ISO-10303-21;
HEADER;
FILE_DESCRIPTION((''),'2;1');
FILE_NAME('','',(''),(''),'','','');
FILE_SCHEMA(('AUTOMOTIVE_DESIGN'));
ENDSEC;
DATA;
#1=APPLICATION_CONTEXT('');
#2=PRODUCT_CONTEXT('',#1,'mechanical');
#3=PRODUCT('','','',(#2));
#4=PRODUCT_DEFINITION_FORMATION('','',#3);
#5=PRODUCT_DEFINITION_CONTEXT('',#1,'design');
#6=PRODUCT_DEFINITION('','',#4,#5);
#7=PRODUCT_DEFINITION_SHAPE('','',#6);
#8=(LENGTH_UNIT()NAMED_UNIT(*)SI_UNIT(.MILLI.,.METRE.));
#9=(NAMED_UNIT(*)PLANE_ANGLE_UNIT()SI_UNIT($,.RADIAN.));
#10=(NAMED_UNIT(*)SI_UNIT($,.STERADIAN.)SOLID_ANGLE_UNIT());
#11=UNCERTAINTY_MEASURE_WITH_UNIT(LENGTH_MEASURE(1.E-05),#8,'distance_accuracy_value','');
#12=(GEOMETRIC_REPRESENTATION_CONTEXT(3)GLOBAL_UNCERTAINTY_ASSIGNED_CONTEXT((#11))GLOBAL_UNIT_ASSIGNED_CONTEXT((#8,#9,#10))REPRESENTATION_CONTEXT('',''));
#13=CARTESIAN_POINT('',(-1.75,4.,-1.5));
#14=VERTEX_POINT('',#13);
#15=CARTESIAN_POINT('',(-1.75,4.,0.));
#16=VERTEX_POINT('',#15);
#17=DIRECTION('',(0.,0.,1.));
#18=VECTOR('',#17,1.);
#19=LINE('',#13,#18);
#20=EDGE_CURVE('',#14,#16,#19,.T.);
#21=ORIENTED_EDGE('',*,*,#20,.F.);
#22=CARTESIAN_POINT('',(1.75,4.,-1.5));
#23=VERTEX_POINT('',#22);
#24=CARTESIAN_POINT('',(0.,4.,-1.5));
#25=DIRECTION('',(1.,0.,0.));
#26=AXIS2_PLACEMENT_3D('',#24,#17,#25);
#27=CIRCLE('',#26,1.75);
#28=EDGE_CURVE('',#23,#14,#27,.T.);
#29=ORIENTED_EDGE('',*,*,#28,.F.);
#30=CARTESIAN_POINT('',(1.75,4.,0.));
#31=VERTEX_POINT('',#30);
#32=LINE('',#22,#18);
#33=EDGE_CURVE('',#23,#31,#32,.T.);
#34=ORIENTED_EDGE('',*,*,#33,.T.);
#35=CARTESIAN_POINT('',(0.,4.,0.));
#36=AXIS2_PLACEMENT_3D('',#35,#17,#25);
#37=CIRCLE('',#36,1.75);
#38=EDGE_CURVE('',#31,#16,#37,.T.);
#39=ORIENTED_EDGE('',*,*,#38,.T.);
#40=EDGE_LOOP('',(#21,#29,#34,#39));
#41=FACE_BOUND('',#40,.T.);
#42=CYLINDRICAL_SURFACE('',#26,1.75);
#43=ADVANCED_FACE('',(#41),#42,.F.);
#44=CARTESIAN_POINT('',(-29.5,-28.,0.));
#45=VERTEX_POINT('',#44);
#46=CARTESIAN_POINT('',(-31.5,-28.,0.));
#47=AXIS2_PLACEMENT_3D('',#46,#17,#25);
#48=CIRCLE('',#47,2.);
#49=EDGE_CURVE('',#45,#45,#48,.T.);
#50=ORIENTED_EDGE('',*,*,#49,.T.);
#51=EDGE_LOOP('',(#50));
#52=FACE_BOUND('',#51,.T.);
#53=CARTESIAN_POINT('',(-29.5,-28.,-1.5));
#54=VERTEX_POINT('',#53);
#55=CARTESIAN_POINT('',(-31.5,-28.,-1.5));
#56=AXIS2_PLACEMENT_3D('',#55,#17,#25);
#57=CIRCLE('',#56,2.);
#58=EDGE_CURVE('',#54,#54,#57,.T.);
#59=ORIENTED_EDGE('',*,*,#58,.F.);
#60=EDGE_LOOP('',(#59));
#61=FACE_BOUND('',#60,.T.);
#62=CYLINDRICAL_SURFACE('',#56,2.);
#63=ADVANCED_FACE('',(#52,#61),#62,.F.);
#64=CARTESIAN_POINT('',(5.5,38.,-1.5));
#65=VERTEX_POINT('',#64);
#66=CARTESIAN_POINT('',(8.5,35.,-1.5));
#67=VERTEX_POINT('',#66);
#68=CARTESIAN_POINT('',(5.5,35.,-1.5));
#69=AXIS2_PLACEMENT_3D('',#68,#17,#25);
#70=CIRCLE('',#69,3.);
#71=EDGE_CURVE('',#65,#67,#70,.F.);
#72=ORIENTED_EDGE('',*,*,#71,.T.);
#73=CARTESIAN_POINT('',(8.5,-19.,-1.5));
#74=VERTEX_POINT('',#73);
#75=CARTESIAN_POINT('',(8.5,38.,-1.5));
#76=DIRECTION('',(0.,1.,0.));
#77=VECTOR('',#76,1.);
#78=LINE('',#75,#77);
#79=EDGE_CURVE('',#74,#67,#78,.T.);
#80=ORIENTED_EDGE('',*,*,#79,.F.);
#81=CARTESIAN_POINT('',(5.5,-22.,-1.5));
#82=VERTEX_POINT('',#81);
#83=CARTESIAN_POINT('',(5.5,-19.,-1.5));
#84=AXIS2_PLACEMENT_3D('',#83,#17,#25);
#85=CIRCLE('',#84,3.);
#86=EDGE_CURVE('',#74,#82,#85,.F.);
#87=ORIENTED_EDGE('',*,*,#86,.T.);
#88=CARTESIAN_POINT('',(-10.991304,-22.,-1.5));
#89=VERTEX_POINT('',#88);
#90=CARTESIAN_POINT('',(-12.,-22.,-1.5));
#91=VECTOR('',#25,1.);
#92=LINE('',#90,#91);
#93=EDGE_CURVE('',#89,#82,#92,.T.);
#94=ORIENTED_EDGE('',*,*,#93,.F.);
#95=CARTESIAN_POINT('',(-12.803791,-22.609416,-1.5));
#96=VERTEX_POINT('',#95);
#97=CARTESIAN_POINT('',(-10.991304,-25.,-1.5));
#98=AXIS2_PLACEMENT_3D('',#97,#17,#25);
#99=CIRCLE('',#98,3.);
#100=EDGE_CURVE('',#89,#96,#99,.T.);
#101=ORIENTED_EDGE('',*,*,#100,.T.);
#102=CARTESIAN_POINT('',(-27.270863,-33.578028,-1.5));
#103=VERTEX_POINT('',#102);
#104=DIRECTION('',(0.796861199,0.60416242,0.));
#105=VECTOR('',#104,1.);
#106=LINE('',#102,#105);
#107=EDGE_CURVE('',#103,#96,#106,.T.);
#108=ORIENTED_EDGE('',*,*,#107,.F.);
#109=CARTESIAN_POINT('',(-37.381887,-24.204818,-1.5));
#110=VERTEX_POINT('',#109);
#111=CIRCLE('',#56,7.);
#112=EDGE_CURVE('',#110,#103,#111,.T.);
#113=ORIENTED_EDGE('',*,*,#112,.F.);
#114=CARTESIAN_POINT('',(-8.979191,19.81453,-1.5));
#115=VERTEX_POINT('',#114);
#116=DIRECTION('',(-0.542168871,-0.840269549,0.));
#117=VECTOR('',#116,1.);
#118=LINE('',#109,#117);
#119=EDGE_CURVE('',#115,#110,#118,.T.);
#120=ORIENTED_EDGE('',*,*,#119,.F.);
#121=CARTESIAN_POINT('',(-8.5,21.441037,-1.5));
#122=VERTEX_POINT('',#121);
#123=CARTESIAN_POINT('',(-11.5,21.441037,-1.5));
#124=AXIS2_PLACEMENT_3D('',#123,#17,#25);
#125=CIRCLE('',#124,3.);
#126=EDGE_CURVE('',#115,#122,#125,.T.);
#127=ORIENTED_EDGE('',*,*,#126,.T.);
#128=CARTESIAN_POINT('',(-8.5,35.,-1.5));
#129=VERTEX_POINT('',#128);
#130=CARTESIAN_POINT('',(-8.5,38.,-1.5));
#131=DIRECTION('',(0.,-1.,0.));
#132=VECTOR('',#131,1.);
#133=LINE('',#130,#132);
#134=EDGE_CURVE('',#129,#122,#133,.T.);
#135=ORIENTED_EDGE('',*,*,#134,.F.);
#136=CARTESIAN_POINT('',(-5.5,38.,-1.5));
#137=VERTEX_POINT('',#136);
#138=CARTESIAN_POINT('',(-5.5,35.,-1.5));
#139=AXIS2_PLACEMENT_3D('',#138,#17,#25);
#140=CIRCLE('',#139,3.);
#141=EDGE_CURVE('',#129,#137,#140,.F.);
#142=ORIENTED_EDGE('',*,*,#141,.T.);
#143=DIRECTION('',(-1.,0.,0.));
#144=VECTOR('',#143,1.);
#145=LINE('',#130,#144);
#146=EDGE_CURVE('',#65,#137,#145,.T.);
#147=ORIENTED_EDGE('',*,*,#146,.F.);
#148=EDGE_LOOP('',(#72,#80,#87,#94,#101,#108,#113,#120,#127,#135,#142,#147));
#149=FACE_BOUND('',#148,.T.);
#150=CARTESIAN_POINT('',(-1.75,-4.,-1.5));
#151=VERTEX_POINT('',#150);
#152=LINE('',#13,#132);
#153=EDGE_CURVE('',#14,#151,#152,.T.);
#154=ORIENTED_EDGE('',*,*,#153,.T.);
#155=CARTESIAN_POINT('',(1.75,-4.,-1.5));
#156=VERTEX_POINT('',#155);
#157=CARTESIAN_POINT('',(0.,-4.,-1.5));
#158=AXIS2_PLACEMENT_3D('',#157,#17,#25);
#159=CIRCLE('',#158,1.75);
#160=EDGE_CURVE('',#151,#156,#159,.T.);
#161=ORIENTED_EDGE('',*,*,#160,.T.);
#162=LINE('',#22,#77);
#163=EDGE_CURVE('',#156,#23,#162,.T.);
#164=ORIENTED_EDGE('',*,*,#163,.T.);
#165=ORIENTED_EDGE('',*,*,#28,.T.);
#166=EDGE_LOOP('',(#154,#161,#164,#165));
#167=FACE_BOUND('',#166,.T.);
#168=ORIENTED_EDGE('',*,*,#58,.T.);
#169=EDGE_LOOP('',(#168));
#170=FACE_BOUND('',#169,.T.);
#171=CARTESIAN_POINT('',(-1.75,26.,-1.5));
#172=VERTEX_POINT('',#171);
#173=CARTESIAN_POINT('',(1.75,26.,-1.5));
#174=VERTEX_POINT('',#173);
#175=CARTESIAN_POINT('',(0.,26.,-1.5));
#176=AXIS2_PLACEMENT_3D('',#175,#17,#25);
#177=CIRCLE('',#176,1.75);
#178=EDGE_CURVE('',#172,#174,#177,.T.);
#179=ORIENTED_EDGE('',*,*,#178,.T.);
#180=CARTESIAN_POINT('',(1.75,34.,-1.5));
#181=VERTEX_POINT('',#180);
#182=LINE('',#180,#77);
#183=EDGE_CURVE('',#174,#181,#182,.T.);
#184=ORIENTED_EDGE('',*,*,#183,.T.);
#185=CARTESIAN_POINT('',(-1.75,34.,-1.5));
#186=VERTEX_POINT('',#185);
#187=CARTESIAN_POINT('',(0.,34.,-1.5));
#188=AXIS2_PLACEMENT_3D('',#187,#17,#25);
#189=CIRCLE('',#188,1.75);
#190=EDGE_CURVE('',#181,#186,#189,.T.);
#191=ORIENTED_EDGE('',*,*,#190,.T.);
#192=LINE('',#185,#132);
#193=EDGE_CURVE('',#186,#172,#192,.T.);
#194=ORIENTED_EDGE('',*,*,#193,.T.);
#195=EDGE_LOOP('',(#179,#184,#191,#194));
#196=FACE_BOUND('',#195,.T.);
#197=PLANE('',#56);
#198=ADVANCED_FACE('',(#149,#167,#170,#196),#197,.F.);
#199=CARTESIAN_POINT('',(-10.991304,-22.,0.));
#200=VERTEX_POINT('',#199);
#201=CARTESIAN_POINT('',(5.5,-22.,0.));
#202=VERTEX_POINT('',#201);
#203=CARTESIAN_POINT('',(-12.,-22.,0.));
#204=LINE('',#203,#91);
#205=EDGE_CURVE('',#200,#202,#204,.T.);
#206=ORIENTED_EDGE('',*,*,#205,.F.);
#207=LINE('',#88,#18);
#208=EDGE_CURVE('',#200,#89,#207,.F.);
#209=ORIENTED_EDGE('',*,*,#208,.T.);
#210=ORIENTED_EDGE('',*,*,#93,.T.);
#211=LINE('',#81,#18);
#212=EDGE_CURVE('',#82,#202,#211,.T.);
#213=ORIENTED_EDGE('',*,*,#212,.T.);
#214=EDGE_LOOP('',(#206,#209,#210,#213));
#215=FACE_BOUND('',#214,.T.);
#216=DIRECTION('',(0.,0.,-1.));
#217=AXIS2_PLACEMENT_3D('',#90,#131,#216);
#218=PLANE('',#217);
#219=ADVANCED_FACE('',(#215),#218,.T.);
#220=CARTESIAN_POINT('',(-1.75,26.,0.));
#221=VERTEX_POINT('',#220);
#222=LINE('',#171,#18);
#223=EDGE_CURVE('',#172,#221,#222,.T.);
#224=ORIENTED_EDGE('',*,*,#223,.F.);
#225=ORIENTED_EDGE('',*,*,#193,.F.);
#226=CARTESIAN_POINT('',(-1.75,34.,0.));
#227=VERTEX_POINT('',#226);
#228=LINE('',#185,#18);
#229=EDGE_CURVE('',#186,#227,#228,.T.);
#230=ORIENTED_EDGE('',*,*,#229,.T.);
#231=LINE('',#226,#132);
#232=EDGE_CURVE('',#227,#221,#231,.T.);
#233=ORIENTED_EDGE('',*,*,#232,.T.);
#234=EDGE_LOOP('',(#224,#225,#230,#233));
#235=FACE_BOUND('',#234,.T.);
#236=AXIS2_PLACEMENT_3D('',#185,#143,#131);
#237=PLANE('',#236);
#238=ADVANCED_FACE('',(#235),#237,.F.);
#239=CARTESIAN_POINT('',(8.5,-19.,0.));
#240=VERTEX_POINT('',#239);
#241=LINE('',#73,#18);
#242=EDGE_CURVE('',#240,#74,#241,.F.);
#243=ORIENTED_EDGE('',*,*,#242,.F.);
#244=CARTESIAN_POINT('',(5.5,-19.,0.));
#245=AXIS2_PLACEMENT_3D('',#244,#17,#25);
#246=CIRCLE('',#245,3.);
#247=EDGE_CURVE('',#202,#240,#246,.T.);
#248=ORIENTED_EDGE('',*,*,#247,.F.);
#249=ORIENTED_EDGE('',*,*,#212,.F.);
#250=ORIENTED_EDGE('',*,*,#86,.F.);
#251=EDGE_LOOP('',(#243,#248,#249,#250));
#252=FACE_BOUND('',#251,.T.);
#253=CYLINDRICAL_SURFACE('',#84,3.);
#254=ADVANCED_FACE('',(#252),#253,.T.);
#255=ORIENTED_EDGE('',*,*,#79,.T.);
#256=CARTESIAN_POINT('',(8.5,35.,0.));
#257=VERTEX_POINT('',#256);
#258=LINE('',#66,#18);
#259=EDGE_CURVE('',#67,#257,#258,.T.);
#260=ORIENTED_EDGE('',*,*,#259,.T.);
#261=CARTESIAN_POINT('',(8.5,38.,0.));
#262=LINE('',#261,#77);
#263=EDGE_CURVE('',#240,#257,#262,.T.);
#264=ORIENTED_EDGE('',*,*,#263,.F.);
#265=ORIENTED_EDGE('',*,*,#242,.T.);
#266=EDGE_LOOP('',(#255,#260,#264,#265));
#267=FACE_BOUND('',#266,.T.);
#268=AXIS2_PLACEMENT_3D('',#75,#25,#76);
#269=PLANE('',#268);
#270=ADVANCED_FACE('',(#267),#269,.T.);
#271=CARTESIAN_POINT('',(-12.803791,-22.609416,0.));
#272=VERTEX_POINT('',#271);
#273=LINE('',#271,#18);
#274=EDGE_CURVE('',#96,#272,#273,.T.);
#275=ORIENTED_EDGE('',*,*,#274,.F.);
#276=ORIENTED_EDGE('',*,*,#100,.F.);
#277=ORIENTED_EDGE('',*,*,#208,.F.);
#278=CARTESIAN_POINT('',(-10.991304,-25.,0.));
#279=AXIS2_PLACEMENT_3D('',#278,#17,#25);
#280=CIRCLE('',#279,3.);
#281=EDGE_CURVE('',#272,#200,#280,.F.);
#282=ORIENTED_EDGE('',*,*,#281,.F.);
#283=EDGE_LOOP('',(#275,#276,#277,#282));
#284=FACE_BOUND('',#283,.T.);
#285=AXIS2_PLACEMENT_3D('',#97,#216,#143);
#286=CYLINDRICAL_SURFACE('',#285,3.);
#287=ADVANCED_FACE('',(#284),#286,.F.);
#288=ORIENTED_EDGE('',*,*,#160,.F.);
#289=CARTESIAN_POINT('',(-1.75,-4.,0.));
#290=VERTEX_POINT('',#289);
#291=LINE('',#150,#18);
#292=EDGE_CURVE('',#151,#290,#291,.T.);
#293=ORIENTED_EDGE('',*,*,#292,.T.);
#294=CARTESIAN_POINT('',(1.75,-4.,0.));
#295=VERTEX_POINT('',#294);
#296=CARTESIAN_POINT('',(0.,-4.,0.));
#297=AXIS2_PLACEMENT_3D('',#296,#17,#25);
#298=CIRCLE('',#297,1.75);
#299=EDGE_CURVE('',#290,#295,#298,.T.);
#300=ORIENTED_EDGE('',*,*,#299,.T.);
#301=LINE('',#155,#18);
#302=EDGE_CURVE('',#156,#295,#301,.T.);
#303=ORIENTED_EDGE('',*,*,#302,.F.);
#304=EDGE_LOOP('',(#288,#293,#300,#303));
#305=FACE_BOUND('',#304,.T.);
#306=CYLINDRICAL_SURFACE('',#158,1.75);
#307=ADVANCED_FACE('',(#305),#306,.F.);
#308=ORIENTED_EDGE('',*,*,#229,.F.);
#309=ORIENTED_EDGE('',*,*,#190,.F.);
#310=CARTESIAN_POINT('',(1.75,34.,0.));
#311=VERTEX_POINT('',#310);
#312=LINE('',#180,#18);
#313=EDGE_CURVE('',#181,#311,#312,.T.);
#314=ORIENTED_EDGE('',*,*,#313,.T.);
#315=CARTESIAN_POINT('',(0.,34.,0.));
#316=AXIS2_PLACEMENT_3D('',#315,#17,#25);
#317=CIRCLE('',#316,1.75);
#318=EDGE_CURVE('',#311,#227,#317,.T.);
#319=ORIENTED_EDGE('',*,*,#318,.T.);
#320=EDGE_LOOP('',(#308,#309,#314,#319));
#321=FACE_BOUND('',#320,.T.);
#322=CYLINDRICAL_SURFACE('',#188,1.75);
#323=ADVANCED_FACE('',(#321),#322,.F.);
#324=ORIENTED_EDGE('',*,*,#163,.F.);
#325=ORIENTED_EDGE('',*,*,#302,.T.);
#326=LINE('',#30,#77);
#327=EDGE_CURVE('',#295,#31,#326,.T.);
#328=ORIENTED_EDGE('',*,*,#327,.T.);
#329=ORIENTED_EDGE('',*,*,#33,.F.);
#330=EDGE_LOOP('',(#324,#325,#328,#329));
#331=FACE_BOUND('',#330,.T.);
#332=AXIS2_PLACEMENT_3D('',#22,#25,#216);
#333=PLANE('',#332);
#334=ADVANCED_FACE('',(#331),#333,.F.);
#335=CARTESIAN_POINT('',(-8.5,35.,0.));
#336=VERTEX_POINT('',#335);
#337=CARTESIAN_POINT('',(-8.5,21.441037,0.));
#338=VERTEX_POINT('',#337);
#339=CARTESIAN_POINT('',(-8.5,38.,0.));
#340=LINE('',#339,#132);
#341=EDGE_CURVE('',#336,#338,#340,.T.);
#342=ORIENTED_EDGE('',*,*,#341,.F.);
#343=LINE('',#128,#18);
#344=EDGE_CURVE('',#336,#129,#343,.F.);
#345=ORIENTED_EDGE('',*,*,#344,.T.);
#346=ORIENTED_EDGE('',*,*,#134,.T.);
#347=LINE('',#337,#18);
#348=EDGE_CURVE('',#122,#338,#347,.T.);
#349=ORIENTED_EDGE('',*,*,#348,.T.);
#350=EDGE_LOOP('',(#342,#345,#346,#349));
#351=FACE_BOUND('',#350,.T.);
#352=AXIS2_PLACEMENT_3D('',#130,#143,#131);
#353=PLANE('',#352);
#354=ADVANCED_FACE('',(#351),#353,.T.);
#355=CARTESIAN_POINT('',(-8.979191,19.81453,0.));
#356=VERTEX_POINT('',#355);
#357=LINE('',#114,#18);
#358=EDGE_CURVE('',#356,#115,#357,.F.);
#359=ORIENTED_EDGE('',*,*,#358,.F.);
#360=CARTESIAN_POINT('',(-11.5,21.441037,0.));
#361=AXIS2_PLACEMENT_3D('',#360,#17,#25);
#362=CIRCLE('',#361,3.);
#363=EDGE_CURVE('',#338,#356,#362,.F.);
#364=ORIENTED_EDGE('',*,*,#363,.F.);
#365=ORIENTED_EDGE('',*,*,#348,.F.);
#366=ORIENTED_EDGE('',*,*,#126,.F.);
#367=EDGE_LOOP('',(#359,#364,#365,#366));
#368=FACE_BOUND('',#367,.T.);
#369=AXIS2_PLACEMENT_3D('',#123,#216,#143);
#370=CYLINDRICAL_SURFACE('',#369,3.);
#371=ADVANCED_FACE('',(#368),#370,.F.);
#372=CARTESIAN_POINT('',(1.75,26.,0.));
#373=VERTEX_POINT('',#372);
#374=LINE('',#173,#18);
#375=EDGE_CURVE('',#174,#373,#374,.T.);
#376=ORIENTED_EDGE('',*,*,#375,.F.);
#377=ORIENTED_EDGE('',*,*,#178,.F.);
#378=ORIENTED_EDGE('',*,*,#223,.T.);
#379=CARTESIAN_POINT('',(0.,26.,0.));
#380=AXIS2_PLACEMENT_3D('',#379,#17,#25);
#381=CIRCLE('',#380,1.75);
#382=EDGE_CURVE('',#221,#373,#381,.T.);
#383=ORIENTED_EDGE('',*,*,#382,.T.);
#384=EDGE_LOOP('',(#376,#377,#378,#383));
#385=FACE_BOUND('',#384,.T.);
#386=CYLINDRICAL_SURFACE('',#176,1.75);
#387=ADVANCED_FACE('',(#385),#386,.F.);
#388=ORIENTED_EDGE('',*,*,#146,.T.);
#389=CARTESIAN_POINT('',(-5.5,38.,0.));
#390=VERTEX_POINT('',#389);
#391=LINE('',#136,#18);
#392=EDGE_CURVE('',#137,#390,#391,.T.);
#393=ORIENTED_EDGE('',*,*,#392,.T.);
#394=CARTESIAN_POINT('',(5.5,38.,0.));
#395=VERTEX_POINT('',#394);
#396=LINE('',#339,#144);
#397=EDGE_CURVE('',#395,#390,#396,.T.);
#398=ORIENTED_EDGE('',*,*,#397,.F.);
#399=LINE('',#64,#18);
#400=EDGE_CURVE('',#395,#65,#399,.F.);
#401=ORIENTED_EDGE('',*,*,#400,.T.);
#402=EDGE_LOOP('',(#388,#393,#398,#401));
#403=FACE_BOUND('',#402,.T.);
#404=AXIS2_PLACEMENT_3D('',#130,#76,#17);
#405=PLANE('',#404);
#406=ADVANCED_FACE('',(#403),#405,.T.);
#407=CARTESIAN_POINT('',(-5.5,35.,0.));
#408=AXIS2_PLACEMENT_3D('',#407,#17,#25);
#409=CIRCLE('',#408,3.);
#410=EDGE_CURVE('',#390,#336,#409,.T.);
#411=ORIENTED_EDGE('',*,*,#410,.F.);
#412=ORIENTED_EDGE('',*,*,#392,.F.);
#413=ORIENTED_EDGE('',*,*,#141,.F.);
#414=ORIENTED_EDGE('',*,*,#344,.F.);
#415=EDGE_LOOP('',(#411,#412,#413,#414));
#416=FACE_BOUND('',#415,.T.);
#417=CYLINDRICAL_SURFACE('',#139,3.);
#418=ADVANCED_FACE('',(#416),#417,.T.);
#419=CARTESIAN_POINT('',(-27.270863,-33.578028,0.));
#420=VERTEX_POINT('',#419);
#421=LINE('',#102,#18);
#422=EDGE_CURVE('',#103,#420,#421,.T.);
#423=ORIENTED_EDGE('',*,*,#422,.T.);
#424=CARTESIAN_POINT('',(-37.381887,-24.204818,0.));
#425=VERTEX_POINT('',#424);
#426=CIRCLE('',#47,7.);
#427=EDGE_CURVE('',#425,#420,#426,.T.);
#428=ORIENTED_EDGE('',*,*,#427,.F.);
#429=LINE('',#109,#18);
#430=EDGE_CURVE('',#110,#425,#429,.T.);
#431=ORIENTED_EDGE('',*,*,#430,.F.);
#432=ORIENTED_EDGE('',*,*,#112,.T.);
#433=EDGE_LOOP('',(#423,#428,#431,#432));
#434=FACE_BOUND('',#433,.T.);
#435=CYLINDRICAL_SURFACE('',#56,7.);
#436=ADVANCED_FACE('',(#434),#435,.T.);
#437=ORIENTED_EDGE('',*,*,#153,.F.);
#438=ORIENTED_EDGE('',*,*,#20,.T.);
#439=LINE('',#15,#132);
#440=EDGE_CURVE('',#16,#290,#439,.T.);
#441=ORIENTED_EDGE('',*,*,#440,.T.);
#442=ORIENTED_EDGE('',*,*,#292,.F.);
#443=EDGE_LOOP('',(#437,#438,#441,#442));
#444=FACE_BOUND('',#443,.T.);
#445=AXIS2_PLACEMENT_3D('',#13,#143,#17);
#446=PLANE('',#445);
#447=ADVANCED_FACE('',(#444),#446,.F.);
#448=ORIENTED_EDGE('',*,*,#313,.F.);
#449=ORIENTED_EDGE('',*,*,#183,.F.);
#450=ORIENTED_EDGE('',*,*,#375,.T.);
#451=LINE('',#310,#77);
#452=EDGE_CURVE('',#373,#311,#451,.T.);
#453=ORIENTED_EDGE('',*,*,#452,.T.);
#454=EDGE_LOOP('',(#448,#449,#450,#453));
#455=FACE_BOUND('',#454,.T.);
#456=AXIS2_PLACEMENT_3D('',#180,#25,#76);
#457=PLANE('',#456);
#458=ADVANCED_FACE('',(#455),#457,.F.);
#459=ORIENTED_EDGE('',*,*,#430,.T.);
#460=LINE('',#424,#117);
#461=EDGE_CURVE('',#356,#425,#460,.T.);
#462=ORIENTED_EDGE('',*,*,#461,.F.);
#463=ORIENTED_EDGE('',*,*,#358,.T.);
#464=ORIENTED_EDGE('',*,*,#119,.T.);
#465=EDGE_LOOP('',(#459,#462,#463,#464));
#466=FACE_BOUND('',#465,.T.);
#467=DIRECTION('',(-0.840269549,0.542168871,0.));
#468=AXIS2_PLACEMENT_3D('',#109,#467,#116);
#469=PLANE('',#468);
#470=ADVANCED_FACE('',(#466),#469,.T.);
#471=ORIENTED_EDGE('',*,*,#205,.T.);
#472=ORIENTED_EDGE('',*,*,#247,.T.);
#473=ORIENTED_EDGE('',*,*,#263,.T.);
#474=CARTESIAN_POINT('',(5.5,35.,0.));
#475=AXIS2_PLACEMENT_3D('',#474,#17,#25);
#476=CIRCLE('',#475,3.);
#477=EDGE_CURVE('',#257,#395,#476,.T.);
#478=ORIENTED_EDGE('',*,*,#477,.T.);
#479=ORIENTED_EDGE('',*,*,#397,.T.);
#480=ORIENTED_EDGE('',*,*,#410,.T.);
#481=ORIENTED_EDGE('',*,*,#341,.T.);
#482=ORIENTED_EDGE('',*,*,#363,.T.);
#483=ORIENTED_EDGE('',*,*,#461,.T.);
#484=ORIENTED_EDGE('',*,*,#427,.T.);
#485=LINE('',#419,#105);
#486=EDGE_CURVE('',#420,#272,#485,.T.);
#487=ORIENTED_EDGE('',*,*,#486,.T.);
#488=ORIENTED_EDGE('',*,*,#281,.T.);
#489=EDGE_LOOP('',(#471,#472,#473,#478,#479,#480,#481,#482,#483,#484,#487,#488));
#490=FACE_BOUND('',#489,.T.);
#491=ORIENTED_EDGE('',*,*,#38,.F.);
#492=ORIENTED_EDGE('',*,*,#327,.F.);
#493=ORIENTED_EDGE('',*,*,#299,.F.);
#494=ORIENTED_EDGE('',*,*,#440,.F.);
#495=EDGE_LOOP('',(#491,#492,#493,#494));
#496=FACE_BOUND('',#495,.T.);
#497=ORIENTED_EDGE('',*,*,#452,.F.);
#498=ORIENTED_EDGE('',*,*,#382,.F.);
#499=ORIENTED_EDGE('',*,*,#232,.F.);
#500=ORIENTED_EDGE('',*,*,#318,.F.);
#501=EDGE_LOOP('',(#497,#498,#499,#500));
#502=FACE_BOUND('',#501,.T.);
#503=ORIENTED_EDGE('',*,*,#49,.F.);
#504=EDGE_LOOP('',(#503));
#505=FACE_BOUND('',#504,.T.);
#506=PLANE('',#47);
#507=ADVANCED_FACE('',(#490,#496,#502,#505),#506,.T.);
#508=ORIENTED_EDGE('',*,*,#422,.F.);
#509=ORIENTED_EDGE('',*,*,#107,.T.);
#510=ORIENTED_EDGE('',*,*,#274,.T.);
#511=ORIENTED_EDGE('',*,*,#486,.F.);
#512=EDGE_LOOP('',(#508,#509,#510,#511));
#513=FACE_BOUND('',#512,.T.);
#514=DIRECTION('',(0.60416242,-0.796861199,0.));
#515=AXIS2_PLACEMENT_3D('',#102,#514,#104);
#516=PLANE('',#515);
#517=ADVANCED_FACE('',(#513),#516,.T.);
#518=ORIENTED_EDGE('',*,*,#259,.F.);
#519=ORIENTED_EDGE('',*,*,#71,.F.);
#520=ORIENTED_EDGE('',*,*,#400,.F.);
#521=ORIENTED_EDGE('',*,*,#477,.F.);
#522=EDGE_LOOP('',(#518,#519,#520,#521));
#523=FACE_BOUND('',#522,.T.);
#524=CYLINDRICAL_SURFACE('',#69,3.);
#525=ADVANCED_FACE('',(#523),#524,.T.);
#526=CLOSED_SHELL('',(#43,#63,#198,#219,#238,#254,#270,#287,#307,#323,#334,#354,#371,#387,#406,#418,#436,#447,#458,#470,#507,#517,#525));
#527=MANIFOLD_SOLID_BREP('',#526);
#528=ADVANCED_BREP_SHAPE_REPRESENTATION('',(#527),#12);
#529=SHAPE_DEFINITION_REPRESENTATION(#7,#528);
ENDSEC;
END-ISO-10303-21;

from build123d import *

# Parameters (mm, degrees)
ESQUISSE1_R               = 2
T_LE_DE_BASE_PLI_E1_DEPTH = 1.5
CONG_1_R                  = 3


# Sheet-metal steps are written as plain solids
with BuildPart() as part:
    # Esquisse1 → Tôle de base pliée1 (new body)
    with BuildSketch(Plane.XY):
        with BuildLine():
            Line((-27.270863059, -33.578028391), (-12, -22))
            Line((-12, -22), (8.5, -22))
            Line((8.5, -22), (8.5, 38))
            Line((8.5, 38), (-8.5, 38))
            Line((-8.5, 38), (-8.5, 20.557195103))
            Line((-8.5, 20.557195103), (-37.381886846, -24.204817905))
            ThreePointArc((-37.381886846, -24.204817905), (-36.258903683, -33.133501313), (-27.270863059, -33.578028391))
        make_face()
        with Locations((-31.5, -28)):
            Circle(ESQUISSE1_R, mode=Mode.SUBTRACT)
        with BuildLine():
            Line((1.75, 4), (1.75, -4))
            ThreePointArc((1.75, -4), (0, -5.75), (-1.75, -4))
            Line((-1.75, -4), (-1.75, 4))
            ThreePointArc((-1.75, 4), (0, 5.75), (1.75, 4))
        make_face(mode=Mode.SUBTRACT)
        with BuildLine():
            Line((1.75, 34), (1.75, 26))
            ThreePointArc((1.75, 26), (0, 24.25), (-1.75, 26))
            Line((-1.75, 26), (-1.75, 34))
            ThreePointArc((-1.75, 34), (0, 35.75), (1.75, 34))
        make_face(mode=Mode.SUBTRACT)
    extrude(amount=-T_LE_DE_BASE_PLI_E1_DEPTH)

    # Congé1
    cong_1_edges = [part.edges().sort_by_distance(p)[0] for p in [
        (-8.5, 38, -0.75),
        (8.5, 38, -0.75),
        (8.5, -22, -0.75),
        (-12, -22, -0.75),
        (-8.5, 20.557195103, -0.75),
    ]]
    fillet(cong_1_edges, radius=CONG_1_R)


solid = part.part
